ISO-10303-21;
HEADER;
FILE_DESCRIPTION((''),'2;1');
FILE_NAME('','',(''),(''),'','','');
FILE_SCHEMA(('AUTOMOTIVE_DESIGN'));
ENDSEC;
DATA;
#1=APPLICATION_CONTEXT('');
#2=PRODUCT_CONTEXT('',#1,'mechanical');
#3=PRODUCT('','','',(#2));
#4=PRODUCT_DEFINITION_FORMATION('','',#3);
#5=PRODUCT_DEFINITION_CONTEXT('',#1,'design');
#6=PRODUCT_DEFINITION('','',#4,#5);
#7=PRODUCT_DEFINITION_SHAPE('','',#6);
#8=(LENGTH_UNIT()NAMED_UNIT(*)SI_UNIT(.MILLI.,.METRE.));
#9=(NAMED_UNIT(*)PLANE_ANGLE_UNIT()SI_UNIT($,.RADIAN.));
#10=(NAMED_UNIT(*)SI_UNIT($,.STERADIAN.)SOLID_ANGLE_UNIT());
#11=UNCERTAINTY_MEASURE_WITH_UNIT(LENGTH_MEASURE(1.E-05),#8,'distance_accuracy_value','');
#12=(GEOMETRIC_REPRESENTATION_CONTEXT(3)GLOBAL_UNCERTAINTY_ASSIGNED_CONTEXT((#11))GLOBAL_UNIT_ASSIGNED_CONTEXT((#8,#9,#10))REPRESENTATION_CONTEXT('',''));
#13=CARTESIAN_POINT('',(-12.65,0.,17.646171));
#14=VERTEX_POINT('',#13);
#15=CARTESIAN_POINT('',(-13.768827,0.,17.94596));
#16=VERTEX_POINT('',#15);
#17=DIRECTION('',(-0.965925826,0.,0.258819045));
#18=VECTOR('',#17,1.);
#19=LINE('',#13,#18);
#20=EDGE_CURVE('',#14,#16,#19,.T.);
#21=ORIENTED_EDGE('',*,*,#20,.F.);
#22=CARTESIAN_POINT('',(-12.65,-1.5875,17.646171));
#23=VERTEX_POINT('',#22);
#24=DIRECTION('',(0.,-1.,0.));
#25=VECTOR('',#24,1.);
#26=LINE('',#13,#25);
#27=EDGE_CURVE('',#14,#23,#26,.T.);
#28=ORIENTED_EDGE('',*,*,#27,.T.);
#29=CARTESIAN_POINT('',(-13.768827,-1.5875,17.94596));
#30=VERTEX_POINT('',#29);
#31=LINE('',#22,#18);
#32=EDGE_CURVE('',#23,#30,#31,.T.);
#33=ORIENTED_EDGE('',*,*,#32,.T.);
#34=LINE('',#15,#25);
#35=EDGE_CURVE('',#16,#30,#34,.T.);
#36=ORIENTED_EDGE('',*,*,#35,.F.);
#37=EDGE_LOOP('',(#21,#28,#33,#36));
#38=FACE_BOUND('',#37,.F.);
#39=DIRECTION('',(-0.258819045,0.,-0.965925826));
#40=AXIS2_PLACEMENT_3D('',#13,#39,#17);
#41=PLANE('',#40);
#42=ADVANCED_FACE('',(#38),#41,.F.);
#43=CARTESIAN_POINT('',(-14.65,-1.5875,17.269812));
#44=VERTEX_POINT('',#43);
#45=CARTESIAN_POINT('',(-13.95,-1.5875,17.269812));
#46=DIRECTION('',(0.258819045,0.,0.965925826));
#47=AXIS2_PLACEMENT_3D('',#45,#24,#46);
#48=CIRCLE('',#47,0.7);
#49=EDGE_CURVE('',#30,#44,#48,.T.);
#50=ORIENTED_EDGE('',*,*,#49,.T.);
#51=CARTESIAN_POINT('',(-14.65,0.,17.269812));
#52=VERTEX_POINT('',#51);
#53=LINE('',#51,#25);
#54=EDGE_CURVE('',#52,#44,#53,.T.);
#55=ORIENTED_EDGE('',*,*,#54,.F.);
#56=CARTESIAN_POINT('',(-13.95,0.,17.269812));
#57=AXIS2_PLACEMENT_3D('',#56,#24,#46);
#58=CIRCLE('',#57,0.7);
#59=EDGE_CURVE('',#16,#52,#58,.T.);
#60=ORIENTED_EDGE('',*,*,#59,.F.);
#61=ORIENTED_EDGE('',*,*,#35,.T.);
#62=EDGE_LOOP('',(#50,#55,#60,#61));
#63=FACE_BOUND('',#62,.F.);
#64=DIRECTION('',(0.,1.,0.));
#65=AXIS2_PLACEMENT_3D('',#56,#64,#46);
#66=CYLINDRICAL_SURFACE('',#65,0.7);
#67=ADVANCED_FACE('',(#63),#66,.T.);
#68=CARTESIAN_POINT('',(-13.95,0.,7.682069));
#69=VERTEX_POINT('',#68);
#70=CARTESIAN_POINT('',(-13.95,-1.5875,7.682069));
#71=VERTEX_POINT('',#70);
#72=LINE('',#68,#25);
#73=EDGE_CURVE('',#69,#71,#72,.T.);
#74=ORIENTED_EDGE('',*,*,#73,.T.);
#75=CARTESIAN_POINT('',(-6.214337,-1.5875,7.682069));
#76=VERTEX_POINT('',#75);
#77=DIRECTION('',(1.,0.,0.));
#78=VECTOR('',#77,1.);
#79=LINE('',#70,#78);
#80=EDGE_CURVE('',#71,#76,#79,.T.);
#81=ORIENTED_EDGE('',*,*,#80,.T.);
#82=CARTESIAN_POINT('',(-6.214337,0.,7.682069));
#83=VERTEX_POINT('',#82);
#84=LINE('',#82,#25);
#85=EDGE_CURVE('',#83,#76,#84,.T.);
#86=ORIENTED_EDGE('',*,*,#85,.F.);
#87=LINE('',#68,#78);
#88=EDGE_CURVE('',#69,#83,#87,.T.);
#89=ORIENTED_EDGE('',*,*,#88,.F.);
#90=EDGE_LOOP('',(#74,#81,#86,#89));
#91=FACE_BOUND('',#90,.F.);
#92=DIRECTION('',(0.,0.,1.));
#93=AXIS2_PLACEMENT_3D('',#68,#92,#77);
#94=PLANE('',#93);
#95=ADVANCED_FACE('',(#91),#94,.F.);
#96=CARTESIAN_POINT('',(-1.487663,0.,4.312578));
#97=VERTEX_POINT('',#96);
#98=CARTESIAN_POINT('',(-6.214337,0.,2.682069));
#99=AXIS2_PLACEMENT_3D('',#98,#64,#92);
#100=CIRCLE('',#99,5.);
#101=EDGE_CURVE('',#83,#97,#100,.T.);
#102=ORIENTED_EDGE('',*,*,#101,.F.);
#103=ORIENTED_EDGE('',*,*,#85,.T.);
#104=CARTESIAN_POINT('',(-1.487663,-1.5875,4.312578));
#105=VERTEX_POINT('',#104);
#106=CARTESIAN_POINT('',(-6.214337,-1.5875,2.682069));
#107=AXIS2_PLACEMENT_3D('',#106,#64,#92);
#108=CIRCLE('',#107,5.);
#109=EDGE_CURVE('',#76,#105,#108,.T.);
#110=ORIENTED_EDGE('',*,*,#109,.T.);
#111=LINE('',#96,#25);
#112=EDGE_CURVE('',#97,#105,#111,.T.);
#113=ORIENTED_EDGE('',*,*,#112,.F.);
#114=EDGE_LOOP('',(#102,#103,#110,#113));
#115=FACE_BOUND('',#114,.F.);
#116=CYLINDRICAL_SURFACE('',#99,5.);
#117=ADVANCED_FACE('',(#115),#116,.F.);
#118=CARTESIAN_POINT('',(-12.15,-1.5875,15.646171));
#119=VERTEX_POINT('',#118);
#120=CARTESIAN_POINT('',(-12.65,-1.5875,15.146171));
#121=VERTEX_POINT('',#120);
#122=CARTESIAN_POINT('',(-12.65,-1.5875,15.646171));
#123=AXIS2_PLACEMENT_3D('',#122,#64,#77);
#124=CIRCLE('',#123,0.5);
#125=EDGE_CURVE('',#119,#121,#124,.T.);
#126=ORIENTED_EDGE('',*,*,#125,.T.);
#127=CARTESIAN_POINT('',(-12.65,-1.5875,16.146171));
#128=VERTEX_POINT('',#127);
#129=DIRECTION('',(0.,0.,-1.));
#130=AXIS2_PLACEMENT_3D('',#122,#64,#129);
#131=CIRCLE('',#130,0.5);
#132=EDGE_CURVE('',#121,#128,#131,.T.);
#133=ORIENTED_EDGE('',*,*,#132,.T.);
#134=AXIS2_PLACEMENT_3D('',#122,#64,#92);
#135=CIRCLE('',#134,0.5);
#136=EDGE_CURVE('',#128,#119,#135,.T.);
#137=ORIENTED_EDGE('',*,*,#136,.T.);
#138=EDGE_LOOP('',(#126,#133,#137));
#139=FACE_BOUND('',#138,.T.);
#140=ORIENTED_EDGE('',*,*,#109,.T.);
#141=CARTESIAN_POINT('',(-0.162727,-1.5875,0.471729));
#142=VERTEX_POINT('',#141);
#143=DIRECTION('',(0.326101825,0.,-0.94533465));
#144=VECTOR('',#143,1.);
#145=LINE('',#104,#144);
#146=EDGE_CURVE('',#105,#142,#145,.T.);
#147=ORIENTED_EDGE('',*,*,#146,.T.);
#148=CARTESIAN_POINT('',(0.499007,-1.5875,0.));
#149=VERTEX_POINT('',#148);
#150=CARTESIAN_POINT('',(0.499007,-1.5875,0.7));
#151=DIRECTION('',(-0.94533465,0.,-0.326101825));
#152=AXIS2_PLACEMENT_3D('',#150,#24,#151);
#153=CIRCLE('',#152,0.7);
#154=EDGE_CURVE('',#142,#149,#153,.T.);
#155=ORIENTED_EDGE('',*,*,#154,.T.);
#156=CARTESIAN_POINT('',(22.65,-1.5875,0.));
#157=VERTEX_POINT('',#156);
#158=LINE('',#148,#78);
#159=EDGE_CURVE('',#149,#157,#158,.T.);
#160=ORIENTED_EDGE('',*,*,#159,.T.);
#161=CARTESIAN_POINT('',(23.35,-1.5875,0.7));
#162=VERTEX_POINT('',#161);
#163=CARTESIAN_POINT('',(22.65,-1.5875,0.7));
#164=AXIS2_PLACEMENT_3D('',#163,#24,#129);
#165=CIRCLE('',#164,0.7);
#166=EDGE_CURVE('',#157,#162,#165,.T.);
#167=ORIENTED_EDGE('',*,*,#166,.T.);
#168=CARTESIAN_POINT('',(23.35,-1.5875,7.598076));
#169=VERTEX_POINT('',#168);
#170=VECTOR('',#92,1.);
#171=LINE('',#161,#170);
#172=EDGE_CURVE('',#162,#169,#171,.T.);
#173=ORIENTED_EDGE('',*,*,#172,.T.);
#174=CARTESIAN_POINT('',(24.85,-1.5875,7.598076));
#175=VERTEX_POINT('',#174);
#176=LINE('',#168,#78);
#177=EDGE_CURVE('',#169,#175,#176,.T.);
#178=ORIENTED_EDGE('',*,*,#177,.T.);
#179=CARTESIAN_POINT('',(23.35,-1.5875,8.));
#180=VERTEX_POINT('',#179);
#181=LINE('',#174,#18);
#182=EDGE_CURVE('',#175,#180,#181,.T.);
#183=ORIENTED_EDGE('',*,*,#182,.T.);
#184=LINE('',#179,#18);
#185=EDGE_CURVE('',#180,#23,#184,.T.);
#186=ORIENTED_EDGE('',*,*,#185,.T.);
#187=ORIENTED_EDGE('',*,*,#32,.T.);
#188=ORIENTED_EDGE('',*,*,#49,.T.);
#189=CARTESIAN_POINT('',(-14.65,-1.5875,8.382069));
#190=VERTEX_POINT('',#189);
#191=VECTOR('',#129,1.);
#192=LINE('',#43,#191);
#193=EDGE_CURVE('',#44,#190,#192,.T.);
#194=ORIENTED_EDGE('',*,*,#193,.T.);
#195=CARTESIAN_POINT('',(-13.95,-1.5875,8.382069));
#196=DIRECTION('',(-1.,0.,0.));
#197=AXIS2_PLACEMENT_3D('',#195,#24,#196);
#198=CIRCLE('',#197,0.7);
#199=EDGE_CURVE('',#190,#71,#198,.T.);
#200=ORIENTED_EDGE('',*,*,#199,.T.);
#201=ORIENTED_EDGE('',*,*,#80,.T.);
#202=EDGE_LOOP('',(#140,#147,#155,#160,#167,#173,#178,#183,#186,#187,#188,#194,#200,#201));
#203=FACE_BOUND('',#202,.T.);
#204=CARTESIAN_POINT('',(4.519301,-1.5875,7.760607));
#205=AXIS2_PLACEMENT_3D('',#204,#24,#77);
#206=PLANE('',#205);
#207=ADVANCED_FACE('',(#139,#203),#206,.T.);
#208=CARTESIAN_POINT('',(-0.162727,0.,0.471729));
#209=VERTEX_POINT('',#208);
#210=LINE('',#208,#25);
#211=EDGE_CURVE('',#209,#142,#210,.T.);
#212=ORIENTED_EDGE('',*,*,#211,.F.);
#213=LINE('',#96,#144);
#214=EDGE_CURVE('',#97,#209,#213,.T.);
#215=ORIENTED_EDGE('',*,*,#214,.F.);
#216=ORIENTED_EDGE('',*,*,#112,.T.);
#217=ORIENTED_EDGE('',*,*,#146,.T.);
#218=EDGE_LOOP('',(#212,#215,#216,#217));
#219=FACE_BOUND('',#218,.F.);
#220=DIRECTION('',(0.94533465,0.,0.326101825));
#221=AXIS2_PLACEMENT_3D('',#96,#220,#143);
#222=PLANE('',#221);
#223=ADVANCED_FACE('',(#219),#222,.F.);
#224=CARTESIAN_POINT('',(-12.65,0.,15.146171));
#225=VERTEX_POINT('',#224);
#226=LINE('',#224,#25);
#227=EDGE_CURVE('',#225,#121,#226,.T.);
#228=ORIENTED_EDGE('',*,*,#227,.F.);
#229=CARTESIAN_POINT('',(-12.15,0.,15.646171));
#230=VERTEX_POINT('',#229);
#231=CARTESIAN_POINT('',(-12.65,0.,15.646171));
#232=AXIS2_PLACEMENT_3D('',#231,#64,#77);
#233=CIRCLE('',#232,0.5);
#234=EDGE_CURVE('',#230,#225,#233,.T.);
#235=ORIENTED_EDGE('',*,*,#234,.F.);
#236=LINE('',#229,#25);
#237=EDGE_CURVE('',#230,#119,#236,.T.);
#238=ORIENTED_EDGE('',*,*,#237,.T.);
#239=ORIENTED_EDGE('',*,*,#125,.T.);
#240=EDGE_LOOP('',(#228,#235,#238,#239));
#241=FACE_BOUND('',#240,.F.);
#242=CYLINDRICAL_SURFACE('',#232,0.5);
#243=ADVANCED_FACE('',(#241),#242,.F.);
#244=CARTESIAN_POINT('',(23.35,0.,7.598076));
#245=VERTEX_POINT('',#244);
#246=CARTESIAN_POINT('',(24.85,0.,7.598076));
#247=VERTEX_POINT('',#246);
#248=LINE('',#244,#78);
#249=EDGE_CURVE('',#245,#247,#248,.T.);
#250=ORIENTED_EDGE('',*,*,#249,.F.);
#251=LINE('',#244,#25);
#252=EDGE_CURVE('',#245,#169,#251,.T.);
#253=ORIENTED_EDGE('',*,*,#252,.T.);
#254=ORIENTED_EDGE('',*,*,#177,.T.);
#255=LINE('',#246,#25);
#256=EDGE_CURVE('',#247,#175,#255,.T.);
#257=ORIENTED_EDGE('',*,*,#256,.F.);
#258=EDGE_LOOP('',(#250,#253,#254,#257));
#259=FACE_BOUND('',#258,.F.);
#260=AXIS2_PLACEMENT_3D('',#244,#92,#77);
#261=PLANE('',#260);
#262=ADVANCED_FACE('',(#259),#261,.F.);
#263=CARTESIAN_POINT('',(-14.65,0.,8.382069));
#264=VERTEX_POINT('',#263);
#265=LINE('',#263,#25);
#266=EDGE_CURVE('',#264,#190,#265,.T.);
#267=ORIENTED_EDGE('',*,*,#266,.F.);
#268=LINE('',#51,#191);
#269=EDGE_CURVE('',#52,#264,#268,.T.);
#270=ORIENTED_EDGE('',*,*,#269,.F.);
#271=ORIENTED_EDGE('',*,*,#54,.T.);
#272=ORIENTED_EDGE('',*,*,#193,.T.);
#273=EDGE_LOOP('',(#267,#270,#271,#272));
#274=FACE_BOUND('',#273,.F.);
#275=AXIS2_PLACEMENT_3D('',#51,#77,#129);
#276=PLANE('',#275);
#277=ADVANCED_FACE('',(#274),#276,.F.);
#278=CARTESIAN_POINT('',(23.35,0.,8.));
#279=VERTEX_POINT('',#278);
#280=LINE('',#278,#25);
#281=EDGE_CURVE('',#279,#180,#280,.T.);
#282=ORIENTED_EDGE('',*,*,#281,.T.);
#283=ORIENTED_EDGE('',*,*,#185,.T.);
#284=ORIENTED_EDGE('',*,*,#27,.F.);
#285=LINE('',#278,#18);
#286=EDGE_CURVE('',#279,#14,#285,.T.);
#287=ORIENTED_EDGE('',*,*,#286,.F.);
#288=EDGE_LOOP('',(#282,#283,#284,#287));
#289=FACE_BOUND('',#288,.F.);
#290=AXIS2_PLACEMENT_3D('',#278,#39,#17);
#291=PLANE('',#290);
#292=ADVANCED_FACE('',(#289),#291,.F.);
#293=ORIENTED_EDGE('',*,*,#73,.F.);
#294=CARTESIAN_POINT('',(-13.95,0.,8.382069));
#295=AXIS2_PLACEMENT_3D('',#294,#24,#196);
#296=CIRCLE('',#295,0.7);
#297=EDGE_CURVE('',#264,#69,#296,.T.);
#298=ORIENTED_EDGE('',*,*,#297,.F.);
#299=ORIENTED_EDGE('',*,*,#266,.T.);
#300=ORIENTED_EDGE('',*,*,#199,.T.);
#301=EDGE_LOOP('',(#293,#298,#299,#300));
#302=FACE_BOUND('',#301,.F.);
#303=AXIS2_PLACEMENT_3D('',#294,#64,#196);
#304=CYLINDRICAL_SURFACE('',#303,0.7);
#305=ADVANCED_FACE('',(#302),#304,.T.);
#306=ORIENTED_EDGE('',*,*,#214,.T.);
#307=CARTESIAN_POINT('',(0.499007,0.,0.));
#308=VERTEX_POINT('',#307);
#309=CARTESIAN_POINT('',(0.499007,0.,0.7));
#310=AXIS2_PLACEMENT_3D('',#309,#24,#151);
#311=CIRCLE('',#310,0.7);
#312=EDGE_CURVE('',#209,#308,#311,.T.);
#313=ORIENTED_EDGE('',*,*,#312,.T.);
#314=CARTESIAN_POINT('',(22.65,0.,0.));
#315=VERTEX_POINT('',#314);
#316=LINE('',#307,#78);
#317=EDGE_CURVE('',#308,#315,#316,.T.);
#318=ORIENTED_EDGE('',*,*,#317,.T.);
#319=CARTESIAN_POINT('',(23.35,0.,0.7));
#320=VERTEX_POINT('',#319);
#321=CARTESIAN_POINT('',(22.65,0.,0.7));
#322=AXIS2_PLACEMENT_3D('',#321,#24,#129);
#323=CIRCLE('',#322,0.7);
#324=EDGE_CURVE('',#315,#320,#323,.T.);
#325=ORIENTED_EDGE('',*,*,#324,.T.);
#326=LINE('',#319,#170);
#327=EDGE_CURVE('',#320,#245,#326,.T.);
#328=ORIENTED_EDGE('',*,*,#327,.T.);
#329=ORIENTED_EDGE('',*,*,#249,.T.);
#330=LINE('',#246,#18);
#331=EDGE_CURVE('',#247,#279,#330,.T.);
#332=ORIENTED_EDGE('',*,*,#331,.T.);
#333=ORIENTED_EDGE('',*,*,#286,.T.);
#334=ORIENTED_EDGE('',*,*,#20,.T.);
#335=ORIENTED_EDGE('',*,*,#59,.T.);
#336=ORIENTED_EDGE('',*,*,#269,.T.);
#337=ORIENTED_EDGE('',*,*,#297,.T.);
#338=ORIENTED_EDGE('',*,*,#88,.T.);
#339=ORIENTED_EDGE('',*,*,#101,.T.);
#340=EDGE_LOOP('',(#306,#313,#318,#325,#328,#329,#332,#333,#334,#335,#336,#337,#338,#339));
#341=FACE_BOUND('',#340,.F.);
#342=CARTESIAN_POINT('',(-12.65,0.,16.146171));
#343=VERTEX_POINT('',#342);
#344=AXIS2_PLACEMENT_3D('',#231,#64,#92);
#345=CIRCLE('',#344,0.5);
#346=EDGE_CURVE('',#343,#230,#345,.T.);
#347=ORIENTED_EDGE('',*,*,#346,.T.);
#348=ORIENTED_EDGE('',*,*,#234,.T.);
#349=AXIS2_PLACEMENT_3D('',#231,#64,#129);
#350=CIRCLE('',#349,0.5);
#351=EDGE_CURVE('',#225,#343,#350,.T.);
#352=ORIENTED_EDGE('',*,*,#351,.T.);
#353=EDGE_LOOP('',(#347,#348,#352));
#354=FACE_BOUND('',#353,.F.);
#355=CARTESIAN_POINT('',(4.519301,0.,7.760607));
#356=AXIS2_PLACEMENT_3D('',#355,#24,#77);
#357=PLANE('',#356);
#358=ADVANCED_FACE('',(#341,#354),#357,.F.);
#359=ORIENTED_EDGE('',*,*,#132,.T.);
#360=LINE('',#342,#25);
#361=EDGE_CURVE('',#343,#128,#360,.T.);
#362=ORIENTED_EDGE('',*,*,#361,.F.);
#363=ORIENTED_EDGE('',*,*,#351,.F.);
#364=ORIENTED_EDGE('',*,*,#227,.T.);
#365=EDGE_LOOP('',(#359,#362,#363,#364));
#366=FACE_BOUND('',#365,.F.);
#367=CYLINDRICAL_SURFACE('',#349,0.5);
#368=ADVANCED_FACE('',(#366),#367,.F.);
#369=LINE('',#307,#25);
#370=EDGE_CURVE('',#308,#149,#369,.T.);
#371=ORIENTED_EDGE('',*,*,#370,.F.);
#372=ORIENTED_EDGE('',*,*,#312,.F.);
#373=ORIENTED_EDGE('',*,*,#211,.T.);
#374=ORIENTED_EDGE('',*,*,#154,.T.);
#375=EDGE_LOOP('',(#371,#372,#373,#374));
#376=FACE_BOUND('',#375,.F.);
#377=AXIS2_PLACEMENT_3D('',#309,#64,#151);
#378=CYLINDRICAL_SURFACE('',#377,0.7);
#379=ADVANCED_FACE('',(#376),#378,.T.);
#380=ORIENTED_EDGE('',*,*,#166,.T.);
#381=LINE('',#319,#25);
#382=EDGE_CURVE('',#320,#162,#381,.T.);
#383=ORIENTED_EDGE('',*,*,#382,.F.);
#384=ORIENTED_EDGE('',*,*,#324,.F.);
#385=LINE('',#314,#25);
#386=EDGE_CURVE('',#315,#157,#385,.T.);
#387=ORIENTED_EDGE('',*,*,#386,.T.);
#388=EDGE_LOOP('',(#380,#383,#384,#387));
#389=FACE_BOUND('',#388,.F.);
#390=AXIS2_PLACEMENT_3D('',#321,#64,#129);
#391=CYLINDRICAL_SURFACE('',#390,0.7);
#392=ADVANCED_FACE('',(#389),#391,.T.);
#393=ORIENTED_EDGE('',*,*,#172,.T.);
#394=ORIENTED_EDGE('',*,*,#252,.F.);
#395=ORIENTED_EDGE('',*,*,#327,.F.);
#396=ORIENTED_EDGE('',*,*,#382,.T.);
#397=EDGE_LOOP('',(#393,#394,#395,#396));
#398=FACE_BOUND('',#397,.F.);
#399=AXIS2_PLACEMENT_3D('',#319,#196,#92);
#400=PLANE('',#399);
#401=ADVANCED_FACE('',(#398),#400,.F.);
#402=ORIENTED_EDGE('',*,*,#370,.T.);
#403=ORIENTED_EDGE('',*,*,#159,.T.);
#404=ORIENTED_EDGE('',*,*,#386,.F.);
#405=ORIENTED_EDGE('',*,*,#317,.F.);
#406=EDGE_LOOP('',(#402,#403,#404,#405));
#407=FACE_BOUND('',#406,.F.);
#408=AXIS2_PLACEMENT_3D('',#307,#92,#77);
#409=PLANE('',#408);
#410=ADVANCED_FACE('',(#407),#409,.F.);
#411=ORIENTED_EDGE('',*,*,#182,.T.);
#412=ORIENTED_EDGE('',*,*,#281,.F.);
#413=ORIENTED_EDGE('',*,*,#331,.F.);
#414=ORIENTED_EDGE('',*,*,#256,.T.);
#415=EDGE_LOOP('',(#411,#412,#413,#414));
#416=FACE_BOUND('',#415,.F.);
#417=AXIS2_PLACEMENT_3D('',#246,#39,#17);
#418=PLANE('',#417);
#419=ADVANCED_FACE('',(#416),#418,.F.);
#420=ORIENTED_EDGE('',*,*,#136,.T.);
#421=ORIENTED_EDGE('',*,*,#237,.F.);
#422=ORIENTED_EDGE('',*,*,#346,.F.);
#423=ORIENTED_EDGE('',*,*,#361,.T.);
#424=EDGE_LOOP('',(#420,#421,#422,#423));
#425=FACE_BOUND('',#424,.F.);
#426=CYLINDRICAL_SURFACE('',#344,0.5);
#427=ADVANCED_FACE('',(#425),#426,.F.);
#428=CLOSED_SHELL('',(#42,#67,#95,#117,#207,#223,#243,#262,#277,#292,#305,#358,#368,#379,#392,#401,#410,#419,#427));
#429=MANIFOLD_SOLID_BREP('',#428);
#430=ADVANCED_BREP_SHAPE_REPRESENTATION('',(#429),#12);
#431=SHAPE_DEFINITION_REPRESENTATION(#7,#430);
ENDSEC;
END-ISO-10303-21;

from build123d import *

# Parameters (mm, degrees)
F1_DEPTH = 1.5875


# Not quite as in the source:
# - a length typed as a fraction of an inch, garbled in the dataset ("3 / 203.2 mm" for 3/8 in), is restored


with BuildPart() as f1:
    # F0 (on Front) → F1 (new body)
    with BuildSketch(Plane.XZ):
        with BuildLine():
            ThreePointArc((-0.162727133, 0.4717287226), (0.0926759109, 0.1300044324), (0.4990071217, 0))
            Line((0.4990071217, 0), (22.65, 0))
            ThreePointArc((22.65, 0), (23.1449747468, 0.2050252532), (23.35, 0.7))
            Line((23.35, 0.7), (23.35, 7.5980762114))
            Line((23.35, 7.5980762114), (23.35, 8))
            Line((23.35, 8), (-12.65, 17.6461709275))
            Line((-12.65, 17.6461709275), (-12.65, 16.1461709275))
            ThreePointArc((-12.65, 16.1461709275), (-12.2964466094, 15.9997243181), (-12.15, 15.6461709275))
            ThreePointArc((-12.15, 15.6461709275), (-12.2964466094, 15.2926175369), (-12.65, 15.1461709275))
            Line((-12.65, 15.1461709275), (-12.65, 7.6820693124))
            Line((-12.65, 7.6820693124), (-6.2143365838, 7.6820693124))
            ThreePointArc((-6.2143365838, 7.6820693124), (-3.311970792, 6.7534662239), (-1.4876633356, 4.3125784367))
            Line((-1.4876633356, 4.3125784367), (-0.162727133, 0.4717287226))
        make_face()
        with BuildLine():
            Line((-13.95, 7.6820693124), (-12.65, 7.6820693124))
            Line((-12.65, 7.6820693124), (-12.65, 15.1461709275))
            ThreePointArc((-12.65, 15.1461709275), (-13.15, 15.6461709275), (-12.65, 16.1461709275))
            Line((-12.65, 16.1461709275), (-12.65, 17.6461709275))
            Line((-12.65, 17.6461709275), (-13.7688266684, 17.9459596298))
            ThreePointArc((-13.7688266684, 17.9459596298), (-14.3761330003, 17.8251588896), (-14.65, 17.2698115514))
            Line((-14.65, 17.2698115514), (-14.65, 8.3820693124))
            ThreePointArc((-14.65, 8.3820693124), (-14.4449747468, 7.8870945656), (-13.95, 7.6820693124))
        make_face()
        Polygon((23.35, 8), (23.35, 7.5980762114), (24.85, 7.5980762114), align=None)
    extrude(amount=F1_DEPTH)


solid = f1.part
